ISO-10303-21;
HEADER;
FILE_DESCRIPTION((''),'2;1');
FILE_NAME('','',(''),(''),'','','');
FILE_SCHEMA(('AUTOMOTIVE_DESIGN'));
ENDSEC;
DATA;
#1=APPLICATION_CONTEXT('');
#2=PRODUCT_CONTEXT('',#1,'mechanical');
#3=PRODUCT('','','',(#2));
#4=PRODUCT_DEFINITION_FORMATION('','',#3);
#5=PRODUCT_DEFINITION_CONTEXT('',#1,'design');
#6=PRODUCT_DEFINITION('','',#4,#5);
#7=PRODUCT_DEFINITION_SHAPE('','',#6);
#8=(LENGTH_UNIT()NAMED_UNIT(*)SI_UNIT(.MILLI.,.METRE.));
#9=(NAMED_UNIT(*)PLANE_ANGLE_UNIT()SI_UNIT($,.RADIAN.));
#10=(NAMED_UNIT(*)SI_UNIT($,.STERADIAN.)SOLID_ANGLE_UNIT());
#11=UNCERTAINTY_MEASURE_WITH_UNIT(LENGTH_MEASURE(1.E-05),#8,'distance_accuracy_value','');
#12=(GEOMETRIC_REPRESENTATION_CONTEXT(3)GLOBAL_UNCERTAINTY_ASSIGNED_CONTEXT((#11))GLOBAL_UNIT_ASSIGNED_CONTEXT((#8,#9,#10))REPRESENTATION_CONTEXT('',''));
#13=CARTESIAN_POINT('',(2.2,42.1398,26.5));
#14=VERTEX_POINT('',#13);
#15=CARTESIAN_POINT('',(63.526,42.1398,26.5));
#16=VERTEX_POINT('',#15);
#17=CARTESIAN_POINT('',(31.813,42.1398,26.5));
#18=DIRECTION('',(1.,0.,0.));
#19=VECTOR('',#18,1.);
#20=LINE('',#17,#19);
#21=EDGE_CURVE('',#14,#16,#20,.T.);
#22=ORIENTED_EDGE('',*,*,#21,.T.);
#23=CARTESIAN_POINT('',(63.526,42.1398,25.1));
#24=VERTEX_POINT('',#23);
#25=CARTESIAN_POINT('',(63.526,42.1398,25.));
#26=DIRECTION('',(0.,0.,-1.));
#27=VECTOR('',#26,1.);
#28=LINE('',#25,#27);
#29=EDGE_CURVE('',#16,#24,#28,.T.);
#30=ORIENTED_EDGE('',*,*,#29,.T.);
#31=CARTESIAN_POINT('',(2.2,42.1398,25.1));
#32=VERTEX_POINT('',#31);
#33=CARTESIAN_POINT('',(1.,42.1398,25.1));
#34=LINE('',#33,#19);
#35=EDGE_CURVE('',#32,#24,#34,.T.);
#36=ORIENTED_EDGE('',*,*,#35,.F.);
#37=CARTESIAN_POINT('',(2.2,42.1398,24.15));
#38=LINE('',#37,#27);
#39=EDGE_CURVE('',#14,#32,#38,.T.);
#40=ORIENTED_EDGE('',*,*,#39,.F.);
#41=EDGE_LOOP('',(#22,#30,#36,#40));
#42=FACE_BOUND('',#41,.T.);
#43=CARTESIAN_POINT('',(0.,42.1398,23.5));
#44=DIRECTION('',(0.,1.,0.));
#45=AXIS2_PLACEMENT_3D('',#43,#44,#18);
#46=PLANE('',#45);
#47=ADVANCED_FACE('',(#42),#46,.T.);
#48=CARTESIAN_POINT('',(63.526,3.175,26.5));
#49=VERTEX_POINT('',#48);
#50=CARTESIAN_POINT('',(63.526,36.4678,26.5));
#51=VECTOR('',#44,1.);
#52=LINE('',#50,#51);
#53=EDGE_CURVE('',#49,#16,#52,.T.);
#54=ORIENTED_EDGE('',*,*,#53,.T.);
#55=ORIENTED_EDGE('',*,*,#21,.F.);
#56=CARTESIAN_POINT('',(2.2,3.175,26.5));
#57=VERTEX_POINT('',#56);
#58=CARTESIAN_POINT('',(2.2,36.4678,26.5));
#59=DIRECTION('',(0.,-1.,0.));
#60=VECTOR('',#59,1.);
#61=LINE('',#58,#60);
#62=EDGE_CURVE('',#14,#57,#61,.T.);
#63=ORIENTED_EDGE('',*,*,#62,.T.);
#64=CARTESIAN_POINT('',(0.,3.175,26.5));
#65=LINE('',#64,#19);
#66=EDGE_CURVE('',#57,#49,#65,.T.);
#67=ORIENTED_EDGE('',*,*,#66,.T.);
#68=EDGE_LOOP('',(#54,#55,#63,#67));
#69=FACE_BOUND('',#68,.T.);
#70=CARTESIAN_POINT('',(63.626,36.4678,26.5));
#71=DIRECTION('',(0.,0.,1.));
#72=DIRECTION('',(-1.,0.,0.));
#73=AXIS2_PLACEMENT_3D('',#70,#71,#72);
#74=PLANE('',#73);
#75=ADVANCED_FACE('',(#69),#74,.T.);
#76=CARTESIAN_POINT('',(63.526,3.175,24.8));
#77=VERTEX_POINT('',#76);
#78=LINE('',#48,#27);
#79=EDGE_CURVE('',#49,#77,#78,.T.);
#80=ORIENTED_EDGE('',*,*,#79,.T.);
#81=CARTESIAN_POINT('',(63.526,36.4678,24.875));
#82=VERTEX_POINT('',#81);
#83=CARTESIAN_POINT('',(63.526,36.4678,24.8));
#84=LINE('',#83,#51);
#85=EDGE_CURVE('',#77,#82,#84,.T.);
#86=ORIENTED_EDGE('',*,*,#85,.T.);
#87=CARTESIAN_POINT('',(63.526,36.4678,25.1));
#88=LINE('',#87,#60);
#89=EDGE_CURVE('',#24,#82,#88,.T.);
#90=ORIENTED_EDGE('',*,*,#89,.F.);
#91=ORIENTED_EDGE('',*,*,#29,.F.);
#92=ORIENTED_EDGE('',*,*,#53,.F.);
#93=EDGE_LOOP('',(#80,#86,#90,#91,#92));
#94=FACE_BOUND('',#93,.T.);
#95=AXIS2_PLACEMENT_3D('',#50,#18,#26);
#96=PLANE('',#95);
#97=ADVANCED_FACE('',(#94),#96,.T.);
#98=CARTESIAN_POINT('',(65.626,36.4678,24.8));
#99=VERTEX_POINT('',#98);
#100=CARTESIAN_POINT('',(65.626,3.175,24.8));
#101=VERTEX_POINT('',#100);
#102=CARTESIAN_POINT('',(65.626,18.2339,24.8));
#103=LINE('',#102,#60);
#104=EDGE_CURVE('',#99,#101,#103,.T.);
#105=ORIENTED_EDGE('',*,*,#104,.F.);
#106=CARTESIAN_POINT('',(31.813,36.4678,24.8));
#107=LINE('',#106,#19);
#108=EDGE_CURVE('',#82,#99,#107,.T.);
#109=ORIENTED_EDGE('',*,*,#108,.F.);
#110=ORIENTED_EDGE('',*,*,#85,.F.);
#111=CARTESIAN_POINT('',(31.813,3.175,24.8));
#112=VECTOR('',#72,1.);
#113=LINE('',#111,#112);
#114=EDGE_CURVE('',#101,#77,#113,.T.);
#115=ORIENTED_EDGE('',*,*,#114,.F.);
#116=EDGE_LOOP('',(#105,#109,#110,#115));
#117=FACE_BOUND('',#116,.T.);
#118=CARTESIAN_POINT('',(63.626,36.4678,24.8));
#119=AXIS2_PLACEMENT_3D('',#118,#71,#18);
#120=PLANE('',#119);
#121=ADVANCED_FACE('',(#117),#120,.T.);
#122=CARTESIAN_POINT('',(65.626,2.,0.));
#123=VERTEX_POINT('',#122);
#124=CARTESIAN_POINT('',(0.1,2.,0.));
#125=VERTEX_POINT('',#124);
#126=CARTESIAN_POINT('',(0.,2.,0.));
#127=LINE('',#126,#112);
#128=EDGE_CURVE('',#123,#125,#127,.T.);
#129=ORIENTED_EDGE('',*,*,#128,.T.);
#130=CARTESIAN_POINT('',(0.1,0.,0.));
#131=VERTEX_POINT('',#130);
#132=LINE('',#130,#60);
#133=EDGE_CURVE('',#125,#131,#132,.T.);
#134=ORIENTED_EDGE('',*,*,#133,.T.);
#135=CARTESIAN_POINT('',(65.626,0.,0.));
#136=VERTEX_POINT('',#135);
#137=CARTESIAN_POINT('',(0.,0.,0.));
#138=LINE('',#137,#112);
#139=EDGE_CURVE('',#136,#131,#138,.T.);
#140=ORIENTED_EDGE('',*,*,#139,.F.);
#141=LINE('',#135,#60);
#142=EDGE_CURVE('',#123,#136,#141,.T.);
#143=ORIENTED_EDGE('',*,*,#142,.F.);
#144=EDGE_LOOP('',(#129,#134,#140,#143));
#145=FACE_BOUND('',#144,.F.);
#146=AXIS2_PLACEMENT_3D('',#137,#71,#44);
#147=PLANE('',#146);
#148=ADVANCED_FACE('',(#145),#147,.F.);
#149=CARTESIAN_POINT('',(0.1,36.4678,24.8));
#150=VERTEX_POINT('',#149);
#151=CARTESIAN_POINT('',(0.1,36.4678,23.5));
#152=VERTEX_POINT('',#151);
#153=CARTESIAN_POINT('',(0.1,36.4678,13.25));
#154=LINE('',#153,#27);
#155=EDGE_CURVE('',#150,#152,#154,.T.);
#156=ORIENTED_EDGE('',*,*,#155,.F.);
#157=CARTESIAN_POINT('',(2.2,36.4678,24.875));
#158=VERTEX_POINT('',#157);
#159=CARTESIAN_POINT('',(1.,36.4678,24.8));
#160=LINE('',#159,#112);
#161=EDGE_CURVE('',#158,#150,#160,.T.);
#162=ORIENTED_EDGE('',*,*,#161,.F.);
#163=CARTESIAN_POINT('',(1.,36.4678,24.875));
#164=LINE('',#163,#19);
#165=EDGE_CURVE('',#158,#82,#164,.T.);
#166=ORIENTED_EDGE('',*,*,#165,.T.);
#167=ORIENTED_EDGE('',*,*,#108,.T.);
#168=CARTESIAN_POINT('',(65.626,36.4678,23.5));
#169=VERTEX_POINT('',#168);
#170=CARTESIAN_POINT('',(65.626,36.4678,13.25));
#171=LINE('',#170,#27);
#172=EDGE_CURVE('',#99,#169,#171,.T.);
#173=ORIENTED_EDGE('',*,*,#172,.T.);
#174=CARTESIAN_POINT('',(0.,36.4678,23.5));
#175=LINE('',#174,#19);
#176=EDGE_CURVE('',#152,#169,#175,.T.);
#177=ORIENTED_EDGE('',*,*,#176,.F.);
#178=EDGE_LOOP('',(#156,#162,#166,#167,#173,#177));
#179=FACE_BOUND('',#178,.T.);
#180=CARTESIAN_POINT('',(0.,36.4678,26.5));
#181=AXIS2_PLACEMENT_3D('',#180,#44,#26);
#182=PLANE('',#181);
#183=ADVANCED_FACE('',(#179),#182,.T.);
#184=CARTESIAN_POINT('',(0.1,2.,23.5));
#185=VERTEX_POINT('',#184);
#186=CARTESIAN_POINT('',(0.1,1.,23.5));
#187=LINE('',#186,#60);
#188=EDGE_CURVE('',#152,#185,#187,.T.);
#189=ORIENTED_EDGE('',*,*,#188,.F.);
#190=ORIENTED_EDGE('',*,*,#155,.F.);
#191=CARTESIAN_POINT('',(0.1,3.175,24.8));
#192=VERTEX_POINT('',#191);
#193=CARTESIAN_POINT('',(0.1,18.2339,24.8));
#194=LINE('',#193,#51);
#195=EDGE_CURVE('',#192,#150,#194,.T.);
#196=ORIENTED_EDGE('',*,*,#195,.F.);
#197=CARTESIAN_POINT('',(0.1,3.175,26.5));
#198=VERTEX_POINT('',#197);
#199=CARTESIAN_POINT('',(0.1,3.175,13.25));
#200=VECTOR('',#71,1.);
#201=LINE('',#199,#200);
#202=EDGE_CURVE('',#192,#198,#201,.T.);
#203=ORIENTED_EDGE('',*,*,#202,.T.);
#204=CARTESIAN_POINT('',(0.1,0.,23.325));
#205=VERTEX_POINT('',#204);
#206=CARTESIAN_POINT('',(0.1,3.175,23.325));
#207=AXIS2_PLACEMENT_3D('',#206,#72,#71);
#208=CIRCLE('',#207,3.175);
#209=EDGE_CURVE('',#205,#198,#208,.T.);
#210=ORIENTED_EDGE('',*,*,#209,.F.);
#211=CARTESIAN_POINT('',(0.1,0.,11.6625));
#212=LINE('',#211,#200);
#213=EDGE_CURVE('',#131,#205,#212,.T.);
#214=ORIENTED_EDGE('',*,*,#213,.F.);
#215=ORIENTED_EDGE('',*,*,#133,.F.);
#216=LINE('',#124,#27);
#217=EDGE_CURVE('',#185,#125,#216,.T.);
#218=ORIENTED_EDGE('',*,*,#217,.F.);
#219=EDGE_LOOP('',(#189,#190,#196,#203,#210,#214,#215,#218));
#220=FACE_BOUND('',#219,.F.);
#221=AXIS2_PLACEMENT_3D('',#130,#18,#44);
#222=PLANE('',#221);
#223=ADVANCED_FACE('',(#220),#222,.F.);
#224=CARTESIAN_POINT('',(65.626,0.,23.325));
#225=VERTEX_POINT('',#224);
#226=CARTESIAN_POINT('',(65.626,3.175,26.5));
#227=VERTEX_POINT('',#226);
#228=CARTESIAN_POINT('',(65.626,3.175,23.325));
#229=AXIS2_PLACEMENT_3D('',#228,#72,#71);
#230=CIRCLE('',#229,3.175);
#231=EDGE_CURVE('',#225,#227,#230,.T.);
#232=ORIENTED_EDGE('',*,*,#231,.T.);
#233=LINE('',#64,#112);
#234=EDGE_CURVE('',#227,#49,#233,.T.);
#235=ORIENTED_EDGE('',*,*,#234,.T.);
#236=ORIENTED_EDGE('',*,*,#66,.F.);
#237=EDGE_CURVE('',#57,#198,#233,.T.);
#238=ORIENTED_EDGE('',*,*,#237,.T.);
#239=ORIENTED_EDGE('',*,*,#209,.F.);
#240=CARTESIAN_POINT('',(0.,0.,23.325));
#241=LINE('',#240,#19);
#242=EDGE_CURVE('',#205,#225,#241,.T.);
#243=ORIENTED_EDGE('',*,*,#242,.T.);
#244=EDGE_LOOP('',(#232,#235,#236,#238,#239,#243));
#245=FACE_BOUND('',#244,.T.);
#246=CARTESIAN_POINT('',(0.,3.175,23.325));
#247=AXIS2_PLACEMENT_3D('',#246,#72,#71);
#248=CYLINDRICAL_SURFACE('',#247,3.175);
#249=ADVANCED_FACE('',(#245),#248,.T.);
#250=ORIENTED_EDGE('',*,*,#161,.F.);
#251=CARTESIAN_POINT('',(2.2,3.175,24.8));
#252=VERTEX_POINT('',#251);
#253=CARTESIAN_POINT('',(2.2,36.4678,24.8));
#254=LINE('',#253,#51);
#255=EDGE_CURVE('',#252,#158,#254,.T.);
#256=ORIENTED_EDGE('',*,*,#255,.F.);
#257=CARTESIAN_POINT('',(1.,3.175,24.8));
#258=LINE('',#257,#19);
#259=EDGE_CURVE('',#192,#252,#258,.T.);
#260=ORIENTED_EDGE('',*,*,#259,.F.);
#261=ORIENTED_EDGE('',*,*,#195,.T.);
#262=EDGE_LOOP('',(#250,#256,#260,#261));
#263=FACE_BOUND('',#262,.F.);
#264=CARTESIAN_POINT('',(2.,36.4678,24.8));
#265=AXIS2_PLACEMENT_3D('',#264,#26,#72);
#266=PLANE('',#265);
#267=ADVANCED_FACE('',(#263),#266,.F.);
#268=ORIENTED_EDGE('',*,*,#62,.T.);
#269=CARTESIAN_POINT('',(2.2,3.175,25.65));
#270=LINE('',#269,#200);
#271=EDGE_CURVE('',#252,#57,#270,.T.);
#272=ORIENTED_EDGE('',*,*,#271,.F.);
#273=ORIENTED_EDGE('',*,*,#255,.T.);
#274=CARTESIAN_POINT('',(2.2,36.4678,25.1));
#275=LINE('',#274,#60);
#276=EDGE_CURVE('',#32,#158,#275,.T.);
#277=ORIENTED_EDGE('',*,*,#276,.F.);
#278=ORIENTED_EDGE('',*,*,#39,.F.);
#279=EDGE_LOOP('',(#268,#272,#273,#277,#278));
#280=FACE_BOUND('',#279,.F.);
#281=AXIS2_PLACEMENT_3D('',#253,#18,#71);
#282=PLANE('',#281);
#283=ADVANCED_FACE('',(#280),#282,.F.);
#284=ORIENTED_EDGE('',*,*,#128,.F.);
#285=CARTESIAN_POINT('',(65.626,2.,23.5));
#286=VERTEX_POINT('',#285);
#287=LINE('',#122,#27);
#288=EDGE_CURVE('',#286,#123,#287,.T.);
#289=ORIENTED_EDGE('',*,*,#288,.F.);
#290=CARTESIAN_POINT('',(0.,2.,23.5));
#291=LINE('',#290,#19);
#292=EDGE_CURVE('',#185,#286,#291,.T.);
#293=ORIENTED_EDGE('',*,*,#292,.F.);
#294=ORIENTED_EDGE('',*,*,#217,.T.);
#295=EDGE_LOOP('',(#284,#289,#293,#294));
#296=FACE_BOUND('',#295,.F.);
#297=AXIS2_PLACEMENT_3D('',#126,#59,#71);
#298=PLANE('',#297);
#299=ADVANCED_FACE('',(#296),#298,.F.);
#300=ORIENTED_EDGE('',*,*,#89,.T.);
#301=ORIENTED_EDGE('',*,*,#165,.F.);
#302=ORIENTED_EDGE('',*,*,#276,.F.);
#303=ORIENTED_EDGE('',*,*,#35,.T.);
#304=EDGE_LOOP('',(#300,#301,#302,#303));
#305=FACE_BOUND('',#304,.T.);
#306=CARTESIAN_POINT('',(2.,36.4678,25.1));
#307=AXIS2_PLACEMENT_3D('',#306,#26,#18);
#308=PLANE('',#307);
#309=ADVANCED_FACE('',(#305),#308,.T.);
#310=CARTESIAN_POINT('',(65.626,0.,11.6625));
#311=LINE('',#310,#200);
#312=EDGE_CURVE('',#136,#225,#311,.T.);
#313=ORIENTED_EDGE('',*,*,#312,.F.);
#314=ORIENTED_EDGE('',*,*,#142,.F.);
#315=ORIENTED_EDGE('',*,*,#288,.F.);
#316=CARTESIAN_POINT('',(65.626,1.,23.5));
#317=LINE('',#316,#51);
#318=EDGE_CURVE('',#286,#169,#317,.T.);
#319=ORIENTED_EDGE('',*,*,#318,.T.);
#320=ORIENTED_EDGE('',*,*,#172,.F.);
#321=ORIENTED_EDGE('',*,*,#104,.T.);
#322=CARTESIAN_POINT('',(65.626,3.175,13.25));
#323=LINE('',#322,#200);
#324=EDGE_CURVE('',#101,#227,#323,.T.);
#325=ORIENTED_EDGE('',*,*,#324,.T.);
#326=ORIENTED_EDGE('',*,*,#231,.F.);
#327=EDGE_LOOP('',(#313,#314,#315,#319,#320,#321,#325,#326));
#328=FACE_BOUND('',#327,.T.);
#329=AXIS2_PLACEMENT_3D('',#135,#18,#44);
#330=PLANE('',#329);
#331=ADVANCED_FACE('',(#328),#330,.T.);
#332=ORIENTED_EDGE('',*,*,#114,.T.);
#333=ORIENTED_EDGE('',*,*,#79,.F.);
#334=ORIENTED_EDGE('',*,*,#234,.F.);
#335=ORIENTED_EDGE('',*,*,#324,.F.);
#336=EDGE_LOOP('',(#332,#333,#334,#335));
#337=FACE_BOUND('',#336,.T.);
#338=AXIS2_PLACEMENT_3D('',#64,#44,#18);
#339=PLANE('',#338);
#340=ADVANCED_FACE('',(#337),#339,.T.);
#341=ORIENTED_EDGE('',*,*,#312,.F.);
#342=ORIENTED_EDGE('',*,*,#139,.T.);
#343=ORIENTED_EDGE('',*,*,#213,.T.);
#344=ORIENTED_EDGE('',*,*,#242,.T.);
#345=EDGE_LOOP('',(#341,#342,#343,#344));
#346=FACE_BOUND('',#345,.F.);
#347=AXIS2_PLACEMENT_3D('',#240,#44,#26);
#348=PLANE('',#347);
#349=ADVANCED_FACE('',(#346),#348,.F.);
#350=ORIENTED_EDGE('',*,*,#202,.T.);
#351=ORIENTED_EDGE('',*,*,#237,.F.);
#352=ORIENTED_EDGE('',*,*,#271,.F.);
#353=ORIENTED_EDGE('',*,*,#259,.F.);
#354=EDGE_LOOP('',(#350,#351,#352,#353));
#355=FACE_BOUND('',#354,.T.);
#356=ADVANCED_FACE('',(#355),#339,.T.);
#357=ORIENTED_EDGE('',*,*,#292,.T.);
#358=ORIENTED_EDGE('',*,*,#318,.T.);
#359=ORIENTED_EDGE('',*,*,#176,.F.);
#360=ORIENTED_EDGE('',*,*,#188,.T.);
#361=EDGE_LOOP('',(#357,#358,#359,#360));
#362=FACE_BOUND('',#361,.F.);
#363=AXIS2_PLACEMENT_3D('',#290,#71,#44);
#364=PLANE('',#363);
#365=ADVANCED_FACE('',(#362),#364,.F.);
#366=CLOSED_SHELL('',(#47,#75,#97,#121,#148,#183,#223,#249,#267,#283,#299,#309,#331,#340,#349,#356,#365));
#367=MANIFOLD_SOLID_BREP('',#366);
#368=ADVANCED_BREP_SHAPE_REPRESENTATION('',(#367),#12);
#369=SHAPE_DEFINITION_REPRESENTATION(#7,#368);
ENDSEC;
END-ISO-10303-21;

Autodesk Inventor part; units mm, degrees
ref_plane "YZ Plane" through (0, 0, 0) normal (1, 0, 0) x (0, 1, 0)
ref_plane "XZ Plane" through (0, 0, 0) normal (0, 1, 0) x (-1, 0, 0)
ref_plane "XY Plane" through (0, 0, 0) normal (0, 0, 1) x (1, 0, 0)
sketch "Sketch1" plane through (0, 0, 0) normal (1, 0, 0) x (0, 1, 0)
  arc A0 (3.175, 26.5) -> (0, 23.325) centre (3.175, 23.325) ccw
  line L0 (36.4678, 26.5) -> (3.175, 26.5)
  line L1 (36.4678, 26.5) -> (36.4678, 23.5)
  line L2 (2, 23.5) -> (36.4678, 23.5)
  line L3 (2, 0) -> (2, 23.5)
  line L4 (0, 0) -> (2, 0)
  line L5 (0, 23.325) -> (0, 0)
  point P0 (0, 0)
extrude "Extrusion1" add sketch "Sketch1" along normal blind 65.626
sketch "Sketch2" plane through (0, 3.175, 26.5) normal (0, 0, 1) x (1, 0, 0)
  line L0 (0, 33.2928) -> (65.626, 33.2928) projected
  line L1 (7.465, 33.2928) -> (58.161, 33.2928)
  line L2 (58.161, 33.2928) -> (58.161, 39.4648)
  line L3 (58.161, 39.4648) -> (7.465, 39.4648)
  line L4 (7.465, 39.4648) -> (7.465, 33.2928)
  point P0 (0, -3.175)
  point P1 (32.813, 39.4648)
  point P2 (32.813, 33.2928)
  dimension "d2" = 50.696
  dimension "d3" = 6.172
extrude "Extrusion2" add sketch "Sketch2" against normal blind 1.7
sketch "Sketch3" plane through (0, 36.4678, 26.5) normal (0, 1, 0) x (1, 0, 0)
  line L0 (58.161, 0) -> (65.626, 0) projected
  line L1 (65.626, 0) -> (63.626, 0)
  line L2 (63.626, 0) -> (63.626, 1.7)
  line L3 (63.626, 1.7) -> (65.626, 1.7)
  line L4 (65.626, 1.7) -> (65.626, 0)
  line L5 (0, 0) -> (7.465, 0) projected
  line L6 (0, 0) -> (2, 0)
  line L7 (2, 0) -> (2, 1.7)
  line L8 (2, 1.7) -> (0, 1.7)
  line L9 (0, 1.7) -> (0, 0)
  point P0 (0, 26.5)
  point P1 (63.626, 0)
  dimension "d6" = 2
  dimension "d7" = 1.7
  dimension "d8" = 2
  dimension "d9" = 1.7
extrude "Extrusion3" cut sketch "Sketch3" against normal up to surface (33.2928 mm away)
sketch "Sketch4" plane through (0, 36.4678, 23.5) normal (0, 1, 0) x (1, 0, 0)
  line L0 (2, -1.3) -> (2, -3) projected
  line L1 (63.626, -3) -> (2, -3)
  line L2 (2, -3) -> (2, -1.3)
  line L3 (2, -1.3) -> (63.626, -1.3)
  line L4 (63.626, -1.3) -> (63.626, -3)
  point P0 (0, 23.5)
extrude "Extrusion4" add sketch "Sketch4" along normal up to surface (6.172 mm away)
sketch "Sketch5" plane through (0, 3.175, 24.8) normal (0, 0, -1) x (-1, 0, 0)
  point P0 (0, -3.175)
move faces "Move1" translate (0, 0, 0.3) faces at (43.084, 40.5825, 24.8)
move faces "Move2" translate (0.2, 0, 0) faces at (2, 27.4275, 25.9333)
move faces "Move3" translate (-0.1, 0, 0) faces at (63.626, 27.4275, 26.0333)
move faces "Move4" translate (0, -0.5, 0) faces at (22.642, 42.6398, 26.0333)
move faces "Move5" translate (0.1, 0, 0) faces at (0, 1.3333, 15.6083)
properties part number "Lid Cover"
